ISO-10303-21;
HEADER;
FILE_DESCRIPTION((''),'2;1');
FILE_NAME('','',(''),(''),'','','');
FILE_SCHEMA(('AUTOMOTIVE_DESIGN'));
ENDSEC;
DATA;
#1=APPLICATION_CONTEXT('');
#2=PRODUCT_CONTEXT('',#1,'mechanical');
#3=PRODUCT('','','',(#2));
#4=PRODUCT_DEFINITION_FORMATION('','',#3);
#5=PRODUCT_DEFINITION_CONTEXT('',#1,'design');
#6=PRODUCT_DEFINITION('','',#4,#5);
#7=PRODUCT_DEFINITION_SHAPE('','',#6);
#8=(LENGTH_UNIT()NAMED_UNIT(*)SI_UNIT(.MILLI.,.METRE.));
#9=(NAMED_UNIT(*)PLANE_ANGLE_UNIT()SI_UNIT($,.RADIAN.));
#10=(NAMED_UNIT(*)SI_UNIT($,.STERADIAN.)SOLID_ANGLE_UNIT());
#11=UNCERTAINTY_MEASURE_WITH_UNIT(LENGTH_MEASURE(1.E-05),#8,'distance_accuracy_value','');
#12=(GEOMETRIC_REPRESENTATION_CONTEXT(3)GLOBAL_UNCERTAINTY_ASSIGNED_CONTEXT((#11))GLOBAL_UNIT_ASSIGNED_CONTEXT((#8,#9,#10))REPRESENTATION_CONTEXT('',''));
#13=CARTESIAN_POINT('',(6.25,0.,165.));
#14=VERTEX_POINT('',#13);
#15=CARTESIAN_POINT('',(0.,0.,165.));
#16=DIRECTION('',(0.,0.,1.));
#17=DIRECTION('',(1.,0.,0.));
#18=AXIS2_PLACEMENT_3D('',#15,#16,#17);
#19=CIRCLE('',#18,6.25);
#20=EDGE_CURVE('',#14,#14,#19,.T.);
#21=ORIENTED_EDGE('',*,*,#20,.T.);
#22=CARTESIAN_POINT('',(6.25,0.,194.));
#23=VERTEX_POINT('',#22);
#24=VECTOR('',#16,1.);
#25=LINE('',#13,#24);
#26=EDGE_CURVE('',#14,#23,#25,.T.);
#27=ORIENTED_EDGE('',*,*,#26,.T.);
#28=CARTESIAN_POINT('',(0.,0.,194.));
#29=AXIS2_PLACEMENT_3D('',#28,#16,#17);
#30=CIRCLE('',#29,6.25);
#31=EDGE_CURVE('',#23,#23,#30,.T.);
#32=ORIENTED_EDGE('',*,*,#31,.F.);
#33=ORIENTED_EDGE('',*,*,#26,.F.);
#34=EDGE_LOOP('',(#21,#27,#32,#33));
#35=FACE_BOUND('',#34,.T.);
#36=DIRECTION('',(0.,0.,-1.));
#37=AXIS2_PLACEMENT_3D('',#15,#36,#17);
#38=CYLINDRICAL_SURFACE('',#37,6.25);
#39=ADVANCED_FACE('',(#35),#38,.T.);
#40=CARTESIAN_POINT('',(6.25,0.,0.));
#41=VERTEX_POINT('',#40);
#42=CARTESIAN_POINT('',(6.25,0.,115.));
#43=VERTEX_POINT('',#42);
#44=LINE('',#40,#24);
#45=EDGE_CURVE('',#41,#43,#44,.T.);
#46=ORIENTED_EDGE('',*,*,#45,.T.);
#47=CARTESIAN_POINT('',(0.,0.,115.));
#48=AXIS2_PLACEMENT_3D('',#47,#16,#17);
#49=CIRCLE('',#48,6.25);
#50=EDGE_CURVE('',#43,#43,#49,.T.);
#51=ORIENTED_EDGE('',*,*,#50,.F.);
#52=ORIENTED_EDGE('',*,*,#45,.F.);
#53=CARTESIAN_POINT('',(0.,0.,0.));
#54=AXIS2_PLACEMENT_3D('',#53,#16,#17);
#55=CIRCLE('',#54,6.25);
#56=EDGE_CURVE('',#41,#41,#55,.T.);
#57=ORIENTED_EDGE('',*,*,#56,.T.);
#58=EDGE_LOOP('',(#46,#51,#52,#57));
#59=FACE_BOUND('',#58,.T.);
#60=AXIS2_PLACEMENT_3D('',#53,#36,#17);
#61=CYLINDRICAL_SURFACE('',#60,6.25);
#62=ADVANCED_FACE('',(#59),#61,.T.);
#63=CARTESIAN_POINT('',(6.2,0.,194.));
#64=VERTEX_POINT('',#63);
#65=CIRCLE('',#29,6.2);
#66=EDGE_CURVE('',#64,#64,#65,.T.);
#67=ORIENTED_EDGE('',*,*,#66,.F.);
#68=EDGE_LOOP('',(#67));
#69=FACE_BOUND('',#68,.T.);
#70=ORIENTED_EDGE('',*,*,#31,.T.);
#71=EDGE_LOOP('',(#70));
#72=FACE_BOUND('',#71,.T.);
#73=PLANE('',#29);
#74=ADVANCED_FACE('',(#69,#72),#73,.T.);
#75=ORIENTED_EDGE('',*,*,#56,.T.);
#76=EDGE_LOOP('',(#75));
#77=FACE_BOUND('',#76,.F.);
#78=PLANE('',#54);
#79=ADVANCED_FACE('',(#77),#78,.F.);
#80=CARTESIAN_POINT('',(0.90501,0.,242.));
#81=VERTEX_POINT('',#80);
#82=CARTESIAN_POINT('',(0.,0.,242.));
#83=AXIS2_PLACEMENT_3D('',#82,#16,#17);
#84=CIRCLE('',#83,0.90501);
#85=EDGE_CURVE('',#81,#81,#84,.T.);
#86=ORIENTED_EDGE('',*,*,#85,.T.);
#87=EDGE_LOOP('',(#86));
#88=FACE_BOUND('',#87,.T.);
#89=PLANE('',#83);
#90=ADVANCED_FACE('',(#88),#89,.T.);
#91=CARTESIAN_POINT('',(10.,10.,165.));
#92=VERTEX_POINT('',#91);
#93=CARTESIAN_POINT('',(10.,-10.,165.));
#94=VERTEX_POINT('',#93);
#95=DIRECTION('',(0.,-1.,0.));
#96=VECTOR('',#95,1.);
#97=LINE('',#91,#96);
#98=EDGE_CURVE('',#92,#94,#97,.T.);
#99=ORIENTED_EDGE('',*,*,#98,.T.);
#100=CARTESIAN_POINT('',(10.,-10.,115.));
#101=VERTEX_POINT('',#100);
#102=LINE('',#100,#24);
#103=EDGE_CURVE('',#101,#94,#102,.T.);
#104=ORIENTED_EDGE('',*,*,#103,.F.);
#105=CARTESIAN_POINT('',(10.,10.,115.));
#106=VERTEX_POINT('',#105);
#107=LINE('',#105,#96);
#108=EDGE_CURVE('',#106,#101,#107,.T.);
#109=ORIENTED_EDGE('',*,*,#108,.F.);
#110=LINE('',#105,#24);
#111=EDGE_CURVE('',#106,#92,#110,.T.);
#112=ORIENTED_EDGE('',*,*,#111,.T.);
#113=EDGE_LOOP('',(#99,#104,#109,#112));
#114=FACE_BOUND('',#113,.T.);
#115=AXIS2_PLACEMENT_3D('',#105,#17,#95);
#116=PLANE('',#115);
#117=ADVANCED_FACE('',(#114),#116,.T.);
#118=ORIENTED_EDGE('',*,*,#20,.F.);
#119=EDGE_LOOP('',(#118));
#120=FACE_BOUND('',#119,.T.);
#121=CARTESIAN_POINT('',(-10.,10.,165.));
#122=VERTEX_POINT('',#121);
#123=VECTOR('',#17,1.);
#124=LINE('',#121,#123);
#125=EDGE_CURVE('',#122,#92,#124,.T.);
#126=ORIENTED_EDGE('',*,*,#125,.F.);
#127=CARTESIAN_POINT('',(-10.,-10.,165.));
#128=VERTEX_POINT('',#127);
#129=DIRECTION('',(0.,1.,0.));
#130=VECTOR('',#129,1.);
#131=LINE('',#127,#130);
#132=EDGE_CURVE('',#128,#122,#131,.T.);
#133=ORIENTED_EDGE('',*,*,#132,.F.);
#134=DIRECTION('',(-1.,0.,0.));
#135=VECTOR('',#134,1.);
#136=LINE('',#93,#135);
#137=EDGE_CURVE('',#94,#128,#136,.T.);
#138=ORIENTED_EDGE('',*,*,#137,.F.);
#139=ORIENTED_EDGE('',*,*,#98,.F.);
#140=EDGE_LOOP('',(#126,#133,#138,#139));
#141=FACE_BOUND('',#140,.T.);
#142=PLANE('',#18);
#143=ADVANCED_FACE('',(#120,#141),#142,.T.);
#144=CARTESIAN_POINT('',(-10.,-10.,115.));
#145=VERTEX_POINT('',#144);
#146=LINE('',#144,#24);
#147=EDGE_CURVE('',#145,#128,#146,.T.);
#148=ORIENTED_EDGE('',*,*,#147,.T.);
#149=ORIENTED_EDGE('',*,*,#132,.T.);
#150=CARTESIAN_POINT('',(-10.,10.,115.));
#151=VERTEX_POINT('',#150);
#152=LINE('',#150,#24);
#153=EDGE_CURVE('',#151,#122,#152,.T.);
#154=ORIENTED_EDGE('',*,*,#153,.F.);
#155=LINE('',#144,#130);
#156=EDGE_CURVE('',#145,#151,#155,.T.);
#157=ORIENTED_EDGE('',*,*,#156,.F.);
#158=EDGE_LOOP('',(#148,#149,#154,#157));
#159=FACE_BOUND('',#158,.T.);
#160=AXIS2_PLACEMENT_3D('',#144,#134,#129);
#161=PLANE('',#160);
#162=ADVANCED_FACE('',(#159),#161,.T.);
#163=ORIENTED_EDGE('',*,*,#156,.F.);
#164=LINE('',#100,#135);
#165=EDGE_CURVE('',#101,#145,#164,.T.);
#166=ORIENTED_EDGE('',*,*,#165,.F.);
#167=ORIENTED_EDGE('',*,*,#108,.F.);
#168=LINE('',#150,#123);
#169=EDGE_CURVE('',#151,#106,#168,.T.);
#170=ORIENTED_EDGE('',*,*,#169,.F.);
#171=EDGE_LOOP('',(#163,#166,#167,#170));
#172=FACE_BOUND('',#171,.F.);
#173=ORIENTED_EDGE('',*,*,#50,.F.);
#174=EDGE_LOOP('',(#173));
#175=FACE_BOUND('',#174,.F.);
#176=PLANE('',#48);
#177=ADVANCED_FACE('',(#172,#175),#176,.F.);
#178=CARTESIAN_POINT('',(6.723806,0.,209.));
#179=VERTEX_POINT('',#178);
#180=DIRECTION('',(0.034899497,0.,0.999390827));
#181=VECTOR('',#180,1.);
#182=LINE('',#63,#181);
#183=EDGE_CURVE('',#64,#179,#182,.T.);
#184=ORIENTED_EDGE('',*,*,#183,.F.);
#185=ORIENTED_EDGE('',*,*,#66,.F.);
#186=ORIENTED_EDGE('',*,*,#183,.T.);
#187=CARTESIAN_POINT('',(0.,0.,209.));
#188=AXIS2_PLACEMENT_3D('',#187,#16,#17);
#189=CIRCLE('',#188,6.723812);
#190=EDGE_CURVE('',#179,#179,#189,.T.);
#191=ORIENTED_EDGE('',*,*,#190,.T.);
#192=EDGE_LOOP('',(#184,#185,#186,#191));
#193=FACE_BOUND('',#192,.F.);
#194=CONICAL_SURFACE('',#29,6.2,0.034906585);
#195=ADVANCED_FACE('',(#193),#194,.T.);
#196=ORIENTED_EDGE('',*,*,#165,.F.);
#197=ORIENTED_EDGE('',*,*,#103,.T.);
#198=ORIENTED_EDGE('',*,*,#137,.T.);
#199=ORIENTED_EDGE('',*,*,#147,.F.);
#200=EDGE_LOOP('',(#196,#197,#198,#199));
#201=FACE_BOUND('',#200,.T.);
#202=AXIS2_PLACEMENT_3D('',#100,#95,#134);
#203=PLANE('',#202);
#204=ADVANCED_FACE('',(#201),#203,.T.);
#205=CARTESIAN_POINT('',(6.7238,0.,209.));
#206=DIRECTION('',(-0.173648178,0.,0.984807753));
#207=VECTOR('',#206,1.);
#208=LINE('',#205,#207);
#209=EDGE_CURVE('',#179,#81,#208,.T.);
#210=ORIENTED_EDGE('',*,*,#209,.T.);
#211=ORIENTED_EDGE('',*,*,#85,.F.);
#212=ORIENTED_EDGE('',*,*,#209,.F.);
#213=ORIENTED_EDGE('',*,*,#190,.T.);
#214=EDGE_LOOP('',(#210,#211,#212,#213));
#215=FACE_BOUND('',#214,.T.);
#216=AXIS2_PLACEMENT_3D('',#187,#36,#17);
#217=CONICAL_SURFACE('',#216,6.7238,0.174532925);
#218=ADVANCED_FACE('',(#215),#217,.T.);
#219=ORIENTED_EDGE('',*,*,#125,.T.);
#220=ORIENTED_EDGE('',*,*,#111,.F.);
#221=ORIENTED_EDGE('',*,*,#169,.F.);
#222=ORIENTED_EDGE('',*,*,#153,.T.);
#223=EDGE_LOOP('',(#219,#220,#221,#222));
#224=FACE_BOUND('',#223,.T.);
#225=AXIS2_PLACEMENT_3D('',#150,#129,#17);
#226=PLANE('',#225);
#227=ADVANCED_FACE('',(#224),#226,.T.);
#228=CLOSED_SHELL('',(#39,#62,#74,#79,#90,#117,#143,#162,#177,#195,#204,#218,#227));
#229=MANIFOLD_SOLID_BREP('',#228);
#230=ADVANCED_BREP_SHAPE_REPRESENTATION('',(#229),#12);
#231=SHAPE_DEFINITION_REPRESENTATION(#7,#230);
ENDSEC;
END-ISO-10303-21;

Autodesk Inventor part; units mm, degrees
ref_plane "YZ Plane" through (0, 0, 0) normal (1, 0, 0) x (0, 1, 0)
ref_plane "XZ Plane" through (0, 0, 0) normal (0, 1, 0) x (-1, 0, 0)
ref_plane "XY Plane" through (0, 0, 0) normal (0, 0, 1) x (1, 0, 0)
sketch "スケッチ1" plane through (0, 0, 0) normal (0, 0, 1) x (1, 0, 0)
  circle A0 centre (0, 0) radius 6.25
  dimension "d0" = 12.5
extrude "押し出し1" add sketch "スケッチ1" along normal blind 115
sketch "スケッチ2" plane through (0, 0, 115) normal (0, 0, 1) x (1, 0, 0)
  line L0 (10, -10) -> (-10, -10)
  line L1 (-10, -10) -> (-10, 10)
  line L2 (-10, 10) -> (10, 10)
  line L3 (10, 10) -> (10, -10)
  line L4 (10, -10) -> (-10, 10) construction
  line L5 (-10, -10) -> (10, 10) construction
  point P0 (0, 0)
  dimension "d3" = 20
  dimension "d4" = 20
extrude "押し出し2" add sketch "スケッチ2" along normal blind 50
sketch "スケッチ3" plane through (0, 0, 165) normal (0, 0, 1) x (1, 0, 0)
  circle A0 centre (0, 0) radius 6.25
  dimension "d7" = 12.5
extrude "押し出し3" add sketch "スケッチ3" along normal blind 29
sketch "スケッチ4" plane through (0, 0, 194) normal (0, 0, 1) x (1, 0, 0)
  circle A0 centre (0, 0) radius 6.2
  dimension "d11" = 12.4
extrude "押し出し4" add sketch "スケッチ4" along normal blind 15 draft 2
sketch "スケッチ5" plane through (0, 0, 209) normal (0, 0, 1) x (1, 0, 0)
  circle A0 centre (0, 0) radius 6.7238
extrude "押し出し5" add sketch "スケッチ5" along normal blind 33 draft -10
properties part number "Coordinate"
